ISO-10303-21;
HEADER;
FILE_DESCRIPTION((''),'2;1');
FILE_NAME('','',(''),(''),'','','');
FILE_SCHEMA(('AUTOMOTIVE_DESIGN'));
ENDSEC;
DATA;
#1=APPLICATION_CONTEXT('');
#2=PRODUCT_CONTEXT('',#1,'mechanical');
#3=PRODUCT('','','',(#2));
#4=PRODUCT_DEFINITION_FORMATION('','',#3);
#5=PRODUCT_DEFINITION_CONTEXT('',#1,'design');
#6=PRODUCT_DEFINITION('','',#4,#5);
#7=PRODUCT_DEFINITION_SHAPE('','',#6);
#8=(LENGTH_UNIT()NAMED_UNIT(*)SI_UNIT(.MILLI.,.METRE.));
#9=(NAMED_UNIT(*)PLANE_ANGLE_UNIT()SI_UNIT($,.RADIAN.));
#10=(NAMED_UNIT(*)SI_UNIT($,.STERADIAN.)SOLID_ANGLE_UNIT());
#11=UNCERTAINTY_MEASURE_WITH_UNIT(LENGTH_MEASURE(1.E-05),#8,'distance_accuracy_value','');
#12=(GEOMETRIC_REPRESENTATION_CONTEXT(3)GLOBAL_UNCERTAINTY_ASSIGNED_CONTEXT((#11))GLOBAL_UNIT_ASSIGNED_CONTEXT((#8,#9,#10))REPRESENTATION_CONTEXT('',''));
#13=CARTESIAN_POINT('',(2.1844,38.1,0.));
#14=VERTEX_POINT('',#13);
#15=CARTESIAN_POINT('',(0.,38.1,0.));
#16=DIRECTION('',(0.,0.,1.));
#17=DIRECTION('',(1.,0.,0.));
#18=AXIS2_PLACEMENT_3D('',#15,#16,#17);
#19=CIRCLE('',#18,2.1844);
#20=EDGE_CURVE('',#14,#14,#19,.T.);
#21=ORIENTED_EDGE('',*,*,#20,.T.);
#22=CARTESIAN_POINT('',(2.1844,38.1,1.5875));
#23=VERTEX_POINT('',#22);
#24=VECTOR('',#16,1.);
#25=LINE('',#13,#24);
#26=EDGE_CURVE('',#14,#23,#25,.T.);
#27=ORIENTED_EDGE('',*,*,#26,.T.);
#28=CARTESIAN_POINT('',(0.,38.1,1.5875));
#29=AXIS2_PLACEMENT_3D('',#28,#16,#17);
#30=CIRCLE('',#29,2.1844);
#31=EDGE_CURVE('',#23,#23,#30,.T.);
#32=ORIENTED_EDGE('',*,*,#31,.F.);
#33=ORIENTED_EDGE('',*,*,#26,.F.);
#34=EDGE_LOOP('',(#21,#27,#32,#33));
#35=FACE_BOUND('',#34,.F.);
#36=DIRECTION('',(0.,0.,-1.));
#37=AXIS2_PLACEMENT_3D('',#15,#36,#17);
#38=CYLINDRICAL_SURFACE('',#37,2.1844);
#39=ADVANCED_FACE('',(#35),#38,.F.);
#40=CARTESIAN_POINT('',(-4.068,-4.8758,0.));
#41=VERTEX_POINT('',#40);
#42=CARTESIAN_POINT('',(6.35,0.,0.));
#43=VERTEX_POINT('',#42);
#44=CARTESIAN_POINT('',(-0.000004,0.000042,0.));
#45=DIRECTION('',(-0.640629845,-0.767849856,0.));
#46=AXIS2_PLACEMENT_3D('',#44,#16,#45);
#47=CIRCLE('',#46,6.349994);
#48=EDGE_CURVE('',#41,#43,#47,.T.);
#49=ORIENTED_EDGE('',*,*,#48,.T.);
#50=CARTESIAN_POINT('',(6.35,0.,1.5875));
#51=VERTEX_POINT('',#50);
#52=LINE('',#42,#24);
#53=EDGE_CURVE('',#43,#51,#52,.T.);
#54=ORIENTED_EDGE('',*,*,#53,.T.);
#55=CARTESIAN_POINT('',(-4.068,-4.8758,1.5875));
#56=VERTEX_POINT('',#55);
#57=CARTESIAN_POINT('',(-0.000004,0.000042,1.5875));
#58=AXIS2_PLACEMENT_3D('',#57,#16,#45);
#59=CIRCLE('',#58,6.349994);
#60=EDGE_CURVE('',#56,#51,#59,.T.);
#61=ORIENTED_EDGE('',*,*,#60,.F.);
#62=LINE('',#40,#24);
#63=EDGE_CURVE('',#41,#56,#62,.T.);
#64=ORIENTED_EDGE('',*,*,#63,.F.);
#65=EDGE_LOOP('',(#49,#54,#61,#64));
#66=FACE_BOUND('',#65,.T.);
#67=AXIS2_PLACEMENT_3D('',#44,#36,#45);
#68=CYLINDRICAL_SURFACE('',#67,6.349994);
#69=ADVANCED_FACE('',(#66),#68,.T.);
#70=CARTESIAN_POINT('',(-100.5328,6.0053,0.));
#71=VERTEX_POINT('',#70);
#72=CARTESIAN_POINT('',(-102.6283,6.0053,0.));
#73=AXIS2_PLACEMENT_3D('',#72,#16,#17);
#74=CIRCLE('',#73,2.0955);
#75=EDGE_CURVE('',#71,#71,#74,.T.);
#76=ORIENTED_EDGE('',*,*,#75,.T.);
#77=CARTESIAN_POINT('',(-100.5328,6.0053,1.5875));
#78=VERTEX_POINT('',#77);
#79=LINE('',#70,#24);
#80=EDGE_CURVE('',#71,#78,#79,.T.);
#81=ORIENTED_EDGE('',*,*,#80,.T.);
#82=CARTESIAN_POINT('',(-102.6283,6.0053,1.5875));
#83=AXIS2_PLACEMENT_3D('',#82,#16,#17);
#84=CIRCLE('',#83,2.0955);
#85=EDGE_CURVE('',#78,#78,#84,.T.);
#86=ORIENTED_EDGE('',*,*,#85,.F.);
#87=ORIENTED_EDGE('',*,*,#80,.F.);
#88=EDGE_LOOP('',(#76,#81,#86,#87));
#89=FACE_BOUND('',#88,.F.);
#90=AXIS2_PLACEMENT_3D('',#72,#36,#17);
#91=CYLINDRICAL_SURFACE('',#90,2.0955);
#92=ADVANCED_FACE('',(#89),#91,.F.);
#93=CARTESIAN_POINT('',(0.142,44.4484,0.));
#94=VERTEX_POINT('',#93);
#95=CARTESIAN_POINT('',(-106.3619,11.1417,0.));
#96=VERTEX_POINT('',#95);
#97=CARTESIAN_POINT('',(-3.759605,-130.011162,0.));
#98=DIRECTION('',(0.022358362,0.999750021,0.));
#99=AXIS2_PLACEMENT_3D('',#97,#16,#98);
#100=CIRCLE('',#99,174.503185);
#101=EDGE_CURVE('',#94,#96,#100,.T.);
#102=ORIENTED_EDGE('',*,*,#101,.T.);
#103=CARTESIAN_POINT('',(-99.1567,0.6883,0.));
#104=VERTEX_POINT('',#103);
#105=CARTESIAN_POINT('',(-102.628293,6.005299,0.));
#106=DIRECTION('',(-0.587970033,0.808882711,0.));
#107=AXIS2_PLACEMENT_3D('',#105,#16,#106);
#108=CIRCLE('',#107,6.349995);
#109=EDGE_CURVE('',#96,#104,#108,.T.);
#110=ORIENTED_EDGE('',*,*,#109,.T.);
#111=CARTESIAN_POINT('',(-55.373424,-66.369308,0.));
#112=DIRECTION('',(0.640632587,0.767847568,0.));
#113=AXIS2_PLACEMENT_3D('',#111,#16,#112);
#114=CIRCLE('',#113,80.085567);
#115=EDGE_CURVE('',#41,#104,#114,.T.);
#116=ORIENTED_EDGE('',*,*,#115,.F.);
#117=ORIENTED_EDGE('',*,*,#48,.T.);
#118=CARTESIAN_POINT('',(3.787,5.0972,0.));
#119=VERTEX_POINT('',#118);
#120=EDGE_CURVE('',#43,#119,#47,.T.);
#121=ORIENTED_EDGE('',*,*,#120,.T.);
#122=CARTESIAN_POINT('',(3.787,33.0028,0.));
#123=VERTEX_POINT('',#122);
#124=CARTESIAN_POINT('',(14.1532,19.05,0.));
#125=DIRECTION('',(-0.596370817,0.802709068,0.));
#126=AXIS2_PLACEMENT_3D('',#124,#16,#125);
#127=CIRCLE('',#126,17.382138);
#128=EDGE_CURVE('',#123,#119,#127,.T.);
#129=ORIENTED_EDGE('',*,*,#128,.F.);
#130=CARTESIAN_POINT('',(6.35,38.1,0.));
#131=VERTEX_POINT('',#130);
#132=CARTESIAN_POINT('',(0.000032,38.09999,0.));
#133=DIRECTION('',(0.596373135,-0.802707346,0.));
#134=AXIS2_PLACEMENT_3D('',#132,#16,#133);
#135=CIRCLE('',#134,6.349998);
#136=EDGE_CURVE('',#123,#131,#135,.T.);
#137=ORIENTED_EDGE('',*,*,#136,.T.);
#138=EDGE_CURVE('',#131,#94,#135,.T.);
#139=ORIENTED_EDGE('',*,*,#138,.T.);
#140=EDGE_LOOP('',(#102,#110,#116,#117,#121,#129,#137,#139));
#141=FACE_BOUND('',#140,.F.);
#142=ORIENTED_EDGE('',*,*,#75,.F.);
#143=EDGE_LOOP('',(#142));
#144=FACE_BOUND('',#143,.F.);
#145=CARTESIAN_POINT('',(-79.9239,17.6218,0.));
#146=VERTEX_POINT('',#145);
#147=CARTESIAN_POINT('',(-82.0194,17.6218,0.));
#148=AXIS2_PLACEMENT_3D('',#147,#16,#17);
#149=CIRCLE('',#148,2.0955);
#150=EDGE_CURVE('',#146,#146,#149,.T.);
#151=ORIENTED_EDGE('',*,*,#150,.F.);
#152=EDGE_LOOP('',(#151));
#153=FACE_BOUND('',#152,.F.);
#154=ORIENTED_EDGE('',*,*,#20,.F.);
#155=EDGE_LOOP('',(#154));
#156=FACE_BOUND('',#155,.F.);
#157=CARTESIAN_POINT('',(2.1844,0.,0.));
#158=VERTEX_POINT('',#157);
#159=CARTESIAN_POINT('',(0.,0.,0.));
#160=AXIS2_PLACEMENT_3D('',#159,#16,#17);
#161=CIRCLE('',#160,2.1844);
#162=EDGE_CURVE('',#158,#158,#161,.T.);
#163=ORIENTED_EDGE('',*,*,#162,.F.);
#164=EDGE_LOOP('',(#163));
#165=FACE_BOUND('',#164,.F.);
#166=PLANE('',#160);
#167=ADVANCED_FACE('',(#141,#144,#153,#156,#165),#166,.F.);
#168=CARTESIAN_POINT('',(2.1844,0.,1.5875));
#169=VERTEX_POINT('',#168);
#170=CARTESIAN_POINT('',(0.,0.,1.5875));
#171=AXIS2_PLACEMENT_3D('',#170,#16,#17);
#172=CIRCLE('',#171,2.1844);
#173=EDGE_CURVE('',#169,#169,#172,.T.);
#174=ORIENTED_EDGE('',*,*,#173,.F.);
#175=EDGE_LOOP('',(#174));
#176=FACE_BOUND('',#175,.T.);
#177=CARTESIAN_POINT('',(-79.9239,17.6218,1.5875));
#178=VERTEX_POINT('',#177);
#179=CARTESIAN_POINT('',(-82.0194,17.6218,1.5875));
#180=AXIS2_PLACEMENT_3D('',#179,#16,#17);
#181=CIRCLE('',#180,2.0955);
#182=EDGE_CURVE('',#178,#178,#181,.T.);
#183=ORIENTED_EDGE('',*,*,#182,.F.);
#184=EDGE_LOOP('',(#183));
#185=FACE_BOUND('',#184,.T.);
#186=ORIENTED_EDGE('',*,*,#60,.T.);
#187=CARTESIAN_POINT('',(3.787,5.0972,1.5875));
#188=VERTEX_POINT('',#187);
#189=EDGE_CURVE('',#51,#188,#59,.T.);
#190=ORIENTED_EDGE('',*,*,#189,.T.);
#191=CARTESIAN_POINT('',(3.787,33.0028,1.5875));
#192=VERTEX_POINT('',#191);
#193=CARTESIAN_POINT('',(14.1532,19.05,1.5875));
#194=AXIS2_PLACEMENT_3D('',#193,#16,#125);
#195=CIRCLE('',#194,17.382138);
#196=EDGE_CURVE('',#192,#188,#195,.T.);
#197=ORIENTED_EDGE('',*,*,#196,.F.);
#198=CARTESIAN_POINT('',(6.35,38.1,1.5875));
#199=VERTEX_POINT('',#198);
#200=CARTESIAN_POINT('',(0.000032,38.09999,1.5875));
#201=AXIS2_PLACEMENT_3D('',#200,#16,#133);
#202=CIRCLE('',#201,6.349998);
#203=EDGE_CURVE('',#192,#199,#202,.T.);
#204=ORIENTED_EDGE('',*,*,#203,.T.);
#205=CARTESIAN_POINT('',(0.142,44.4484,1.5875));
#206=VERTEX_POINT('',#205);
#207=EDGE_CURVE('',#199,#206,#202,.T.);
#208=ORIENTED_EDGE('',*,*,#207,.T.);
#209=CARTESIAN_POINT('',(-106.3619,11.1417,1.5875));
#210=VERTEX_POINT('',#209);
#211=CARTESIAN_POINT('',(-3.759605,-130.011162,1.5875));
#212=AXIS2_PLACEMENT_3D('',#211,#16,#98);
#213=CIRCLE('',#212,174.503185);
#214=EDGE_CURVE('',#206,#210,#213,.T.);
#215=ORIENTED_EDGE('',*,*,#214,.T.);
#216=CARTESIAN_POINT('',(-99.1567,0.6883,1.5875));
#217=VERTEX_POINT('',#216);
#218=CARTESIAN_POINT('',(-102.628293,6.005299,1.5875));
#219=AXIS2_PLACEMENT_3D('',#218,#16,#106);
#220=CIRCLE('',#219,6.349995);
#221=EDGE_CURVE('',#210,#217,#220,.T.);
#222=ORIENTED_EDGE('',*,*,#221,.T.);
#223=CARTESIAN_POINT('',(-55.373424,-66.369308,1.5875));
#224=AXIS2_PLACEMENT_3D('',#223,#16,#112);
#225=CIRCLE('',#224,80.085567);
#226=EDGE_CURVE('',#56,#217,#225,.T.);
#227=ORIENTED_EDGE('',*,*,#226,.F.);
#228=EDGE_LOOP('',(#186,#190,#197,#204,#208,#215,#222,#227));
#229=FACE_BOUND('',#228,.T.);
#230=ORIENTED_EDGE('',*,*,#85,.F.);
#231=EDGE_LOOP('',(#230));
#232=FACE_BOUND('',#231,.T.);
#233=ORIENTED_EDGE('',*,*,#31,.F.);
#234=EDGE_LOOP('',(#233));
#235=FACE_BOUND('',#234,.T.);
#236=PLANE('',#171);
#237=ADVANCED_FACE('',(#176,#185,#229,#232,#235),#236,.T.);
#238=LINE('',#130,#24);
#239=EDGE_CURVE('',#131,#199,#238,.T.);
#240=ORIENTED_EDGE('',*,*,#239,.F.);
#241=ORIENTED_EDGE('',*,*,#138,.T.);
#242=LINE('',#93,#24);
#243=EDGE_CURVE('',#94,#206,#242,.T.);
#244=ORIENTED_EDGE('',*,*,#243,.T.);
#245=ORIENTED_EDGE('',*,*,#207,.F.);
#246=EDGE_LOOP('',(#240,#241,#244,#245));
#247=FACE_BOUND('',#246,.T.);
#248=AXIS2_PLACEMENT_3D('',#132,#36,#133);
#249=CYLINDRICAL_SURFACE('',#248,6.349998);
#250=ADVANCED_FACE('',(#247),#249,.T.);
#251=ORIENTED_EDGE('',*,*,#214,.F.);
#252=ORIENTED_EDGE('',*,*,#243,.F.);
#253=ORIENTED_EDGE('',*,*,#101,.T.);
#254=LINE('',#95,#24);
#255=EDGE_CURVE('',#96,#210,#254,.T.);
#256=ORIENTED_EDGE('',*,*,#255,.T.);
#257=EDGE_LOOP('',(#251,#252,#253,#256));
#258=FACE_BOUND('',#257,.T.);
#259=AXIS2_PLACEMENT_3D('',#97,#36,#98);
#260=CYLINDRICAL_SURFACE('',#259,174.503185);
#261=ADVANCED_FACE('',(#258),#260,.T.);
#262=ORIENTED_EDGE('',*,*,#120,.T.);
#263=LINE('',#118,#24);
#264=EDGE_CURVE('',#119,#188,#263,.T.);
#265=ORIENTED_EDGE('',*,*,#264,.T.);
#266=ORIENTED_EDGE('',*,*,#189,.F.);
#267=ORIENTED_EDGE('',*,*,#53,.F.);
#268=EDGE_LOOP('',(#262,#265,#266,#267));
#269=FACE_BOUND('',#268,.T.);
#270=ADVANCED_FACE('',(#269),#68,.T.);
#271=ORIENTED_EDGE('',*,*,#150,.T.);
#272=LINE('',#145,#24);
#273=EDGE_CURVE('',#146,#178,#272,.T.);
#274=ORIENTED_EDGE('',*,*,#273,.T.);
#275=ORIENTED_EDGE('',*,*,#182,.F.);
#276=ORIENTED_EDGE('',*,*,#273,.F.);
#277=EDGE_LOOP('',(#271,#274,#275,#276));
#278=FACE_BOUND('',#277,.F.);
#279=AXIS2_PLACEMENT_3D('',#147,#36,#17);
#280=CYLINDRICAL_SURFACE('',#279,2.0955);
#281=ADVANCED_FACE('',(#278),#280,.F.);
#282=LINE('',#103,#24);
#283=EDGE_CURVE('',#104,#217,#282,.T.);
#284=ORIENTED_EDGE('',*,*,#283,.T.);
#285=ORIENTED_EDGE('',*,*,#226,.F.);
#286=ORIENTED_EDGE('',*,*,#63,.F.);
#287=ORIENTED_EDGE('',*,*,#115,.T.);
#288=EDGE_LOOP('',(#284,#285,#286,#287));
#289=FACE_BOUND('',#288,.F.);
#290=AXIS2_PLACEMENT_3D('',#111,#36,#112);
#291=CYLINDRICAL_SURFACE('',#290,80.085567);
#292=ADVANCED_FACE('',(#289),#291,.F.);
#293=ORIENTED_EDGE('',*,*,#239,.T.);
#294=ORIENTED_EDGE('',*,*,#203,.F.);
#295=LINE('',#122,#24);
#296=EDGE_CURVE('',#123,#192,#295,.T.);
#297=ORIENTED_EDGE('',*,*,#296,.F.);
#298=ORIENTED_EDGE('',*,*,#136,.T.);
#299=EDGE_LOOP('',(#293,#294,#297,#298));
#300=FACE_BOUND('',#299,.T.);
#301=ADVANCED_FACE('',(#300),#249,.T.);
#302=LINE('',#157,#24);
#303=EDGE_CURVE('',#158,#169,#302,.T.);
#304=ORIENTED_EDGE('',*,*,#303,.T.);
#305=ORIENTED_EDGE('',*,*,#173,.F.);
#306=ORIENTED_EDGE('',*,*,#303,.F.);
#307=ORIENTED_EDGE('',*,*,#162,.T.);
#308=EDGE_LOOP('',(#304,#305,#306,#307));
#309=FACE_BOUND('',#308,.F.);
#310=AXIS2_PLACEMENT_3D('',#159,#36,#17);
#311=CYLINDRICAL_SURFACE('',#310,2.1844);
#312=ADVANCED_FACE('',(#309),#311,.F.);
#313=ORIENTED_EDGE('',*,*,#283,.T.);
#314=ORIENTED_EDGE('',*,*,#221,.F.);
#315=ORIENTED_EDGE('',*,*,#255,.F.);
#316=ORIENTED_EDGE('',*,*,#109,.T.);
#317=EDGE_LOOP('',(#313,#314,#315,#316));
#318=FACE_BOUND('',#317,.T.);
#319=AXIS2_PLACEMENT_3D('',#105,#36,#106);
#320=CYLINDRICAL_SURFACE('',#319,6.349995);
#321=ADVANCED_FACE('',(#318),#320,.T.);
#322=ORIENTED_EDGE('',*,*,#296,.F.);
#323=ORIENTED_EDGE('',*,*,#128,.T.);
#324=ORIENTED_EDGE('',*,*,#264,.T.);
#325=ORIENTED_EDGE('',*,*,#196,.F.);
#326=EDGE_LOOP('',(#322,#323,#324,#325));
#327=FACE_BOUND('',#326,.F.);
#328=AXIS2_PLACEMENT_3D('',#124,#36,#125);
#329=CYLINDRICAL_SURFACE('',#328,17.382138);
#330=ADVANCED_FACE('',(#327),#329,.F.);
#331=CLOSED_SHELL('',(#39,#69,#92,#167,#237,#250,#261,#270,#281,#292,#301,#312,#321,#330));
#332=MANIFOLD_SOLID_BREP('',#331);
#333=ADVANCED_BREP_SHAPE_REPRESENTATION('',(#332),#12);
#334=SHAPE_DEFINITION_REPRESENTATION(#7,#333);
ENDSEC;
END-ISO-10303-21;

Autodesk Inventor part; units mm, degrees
ref_plane "YZ Plane" through (0, 0, 0) normal (1, 0, 0) x (0, 1, 0)
ref_plane "XZ Plane" through (0, 0, 0) normal (0, 1, 0) x (-1, 0, 0)
ref_plane "XY Plane" through (0, 0, 0) normal (0, 0, 1) x (1, 0, 0)
sketch "Block1" plane through (0, 0, 0) normal (0, 0, 1) x (1, 0, 0)
  circle A0 centre (47.0944, 34.7657) radius 2.1844
  circle A1 centre (-55.5339, 40.771) radius 2.0955
  arc A2 (-59.2675, 45.9074) -> (-52.0623, 35.454) centre (-55.5339, 40.771) ccw
  arc A3 (43.0264, 29.8899) -> (53.4444, 34.7657) centre (47.0944, 34.7657) ccw
  arc A4 (43.0264, 29.8899) -> (-52.0623, 35.454) centre (-8.279, -31.6038) ccw
  circle A5 centre (47.0944, 72.8657) radius 2.1844
  arc A6 (53.4444, 72.8657) -> (47.2364, 79.2141) centre (47.0944, 72.8657) ccw
  arc A7 (47.2364, 79.2141) -> (-59.2675, 45.9074) centre (43.3348, -95.2454) ccw
  circle A8 centre (-34.925, 52.3875) radius 2.0955
  point P0 (37.587, 35.3505)
  dimension "d2" = 12.7
  dimension "d3" = 12.7
  dimension "d4" = 12.7
  dimension "d9" = 4.191
sketch "Sketch1" plane through (0, 0, 0) normal (0, 0, 1) x (1, 0, 0)
  arc A0 (3.787, 33.0028) -> (0.142, 44.4484) centre (0, 38.1) ccw
  arc A1 (-4.068, -4.8758) -> (3.787, 5.0972) centre (0, 0) ccw
  arc A2 (3.787, 33.0028) -> (3.787, 5.0972) centre (14.1532, 19.05) ccw
  circle A3 centre (0, 0) radius 2.1844
  circle A4 centre (-102.6283, 6.0053) radius 2.0955
  arc A5 (-106.3619, 11.1417) -> (-99.1567, 0.6883) centre (-102.6283, 6.0053) ccw
  arc A6 (-4.068, -4.8758) -> (6.35, 0) centre (0, 0) ccw
  arc A7 (-4.068, -4.8758) -> (-99.1567, 0.6883) centre (-55.3735, -66.3695) ccw
  circle A8 centre (0, 38.1) radius 2.1844
  arc A9 (6.35, 38.1) -> (0.142, 44.4484) centre (0, 38.1) ccw
  arc A10 (0.142, 44.4484) -> (-106.3619, 11.1417) centre (-3.7596, -130.0112) ccw
  circle A11 centre (-82.0194, 17.6218) radius 2.0955
  point P0 (6.35, 0)
  point P1 (6.35, 38.1)
extrude "Extrusion1" add sketch "Sketch1" along normal blind 1.5875
equation "\"BendRadius\" = Thickness"
equation "\"BendReliefWidth\" = Thickness"
equation "\"BendReliefDepth\" = 0.5 * Thickness"
equation "\"CornerReliefSize\" = 4 * Thickness"
equation "\"MinimumRemnant\" = 2 * Thickness"
equation "\"TransitionRadius\" = BendRadius"
equation "\"JacobiRadiusSize\" = BendRadius"
equation "\"GapSize\" = Thickness"
equation "\"Thickness\" = 1.5875"
properties part number "triball_jig" material "Acetal Resin, White"
